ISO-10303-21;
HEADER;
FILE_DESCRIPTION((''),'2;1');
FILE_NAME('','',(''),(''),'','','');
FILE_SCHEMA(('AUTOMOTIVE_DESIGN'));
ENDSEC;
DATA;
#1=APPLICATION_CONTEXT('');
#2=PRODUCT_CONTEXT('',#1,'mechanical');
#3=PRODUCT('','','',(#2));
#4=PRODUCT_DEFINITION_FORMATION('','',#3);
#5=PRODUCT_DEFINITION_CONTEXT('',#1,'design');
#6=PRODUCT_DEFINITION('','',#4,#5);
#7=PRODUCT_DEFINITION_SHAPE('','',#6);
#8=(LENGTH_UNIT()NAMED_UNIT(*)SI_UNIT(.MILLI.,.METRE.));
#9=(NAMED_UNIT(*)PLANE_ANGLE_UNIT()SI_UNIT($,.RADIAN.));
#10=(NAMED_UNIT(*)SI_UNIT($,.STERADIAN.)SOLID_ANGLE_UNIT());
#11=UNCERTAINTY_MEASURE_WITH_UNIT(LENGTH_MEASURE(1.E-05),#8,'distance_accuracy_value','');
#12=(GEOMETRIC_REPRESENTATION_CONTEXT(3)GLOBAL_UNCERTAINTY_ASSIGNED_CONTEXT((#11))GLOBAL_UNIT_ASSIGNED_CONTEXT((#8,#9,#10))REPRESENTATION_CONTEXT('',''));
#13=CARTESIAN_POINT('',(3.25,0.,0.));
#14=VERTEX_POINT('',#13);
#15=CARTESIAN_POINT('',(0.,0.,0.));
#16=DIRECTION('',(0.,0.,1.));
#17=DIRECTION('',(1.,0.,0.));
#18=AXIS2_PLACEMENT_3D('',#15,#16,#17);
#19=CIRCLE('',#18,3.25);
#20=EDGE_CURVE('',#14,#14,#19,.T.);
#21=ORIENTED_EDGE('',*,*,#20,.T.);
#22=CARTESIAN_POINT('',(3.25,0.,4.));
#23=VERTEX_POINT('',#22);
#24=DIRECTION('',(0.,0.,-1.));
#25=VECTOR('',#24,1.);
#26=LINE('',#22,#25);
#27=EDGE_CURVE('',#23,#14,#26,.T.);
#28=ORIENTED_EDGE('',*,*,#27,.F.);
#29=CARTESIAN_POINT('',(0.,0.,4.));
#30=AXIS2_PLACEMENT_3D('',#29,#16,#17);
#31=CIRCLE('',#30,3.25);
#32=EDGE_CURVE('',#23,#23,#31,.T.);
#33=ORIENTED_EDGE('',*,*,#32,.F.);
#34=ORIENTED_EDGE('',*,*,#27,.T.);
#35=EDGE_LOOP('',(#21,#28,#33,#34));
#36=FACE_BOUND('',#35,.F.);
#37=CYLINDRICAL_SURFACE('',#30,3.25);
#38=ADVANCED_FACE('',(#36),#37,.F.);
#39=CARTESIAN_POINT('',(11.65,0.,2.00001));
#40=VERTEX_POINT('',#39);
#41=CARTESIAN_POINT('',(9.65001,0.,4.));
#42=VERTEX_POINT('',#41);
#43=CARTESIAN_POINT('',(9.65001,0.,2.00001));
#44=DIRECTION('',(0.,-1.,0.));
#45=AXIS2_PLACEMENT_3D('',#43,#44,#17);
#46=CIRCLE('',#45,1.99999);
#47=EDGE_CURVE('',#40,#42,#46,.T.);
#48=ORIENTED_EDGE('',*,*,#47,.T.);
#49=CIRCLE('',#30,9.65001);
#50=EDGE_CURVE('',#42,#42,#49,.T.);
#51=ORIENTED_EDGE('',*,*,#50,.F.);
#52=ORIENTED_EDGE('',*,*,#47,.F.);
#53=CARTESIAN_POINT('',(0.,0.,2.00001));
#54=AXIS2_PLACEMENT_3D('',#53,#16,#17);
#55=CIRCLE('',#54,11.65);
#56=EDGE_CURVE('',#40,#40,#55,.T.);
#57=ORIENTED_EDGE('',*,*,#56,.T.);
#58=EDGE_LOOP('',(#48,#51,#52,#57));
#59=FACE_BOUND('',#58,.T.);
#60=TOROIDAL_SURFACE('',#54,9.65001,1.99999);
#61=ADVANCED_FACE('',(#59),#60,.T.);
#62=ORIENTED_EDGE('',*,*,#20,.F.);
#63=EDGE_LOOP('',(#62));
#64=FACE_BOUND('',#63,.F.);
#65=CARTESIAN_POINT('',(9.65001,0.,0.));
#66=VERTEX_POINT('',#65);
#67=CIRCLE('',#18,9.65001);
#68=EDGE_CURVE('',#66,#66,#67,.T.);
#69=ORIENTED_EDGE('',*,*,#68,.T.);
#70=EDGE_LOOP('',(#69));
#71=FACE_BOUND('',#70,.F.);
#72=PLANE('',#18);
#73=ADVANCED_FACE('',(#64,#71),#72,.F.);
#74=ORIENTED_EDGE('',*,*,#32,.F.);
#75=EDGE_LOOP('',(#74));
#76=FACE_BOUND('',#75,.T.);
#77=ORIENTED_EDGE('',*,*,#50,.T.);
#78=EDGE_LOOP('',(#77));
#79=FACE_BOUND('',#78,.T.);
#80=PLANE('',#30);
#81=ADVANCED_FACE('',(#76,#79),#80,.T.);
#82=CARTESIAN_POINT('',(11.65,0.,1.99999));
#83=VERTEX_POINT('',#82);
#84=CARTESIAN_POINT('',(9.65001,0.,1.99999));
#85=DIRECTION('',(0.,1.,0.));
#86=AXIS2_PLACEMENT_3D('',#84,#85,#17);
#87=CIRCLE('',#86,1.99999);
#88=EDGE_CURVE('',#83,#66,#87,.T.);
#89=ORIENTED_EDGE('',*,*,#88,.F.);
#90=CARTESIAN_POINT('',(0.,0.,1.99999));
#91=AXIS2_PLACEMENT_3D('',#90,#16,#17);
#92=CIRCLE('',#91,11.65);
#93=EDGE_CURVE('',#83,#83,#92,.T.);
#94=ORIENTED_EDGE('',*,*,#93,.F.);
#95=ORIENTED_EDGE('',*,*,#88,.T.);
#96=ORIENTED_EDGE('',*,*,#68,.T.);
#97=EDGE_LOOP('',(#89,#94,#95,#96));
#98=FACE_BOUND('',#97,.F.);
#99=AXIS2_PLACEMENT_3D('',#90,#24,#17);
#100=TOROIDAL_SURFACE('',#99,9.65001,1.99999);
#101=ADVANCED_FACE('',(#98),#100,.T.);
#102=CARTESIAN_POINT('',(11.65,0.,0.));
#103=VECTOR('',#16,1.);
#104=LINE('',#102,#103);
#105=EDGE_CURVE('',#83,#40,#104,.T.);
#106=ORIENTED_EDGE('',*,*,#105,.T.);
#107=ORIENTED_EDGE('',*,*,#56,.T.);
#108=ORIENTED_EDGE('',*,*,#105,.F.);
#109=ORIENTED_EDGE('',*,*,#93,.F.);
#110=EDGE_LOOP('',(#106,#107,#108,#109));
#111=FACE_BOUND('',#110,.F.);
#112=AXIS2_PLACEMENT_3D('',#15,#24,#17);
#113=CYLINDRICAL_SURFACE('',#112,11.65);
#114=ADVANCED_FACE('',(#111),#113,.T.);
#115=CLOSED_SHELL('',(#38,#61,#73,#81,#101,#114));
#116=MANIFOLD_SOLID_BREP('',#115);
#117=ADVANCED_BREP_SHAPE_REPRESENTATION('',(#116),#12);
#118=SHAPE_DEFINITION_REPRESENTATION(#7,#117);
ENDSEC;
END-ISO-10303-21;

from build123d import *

# Parameters (mm, degrees)
F0_R     = 11.65
F1_DEPTH = 4
F2_R     = 1.99999
F3_R     = 3.25
F4_DEPTH = 25


# Not quite as in the source:
# - a fillet or chamfer is up to 0.001 mm smaller than in the source, because OpenCascade refuses the exact size


with BuildPart() as f1:
    # F0 (on Top) → F1 (new body)
    with BuildSketch(Plane.XY):
        Circle(F0_R)
    extrude(amount=F1_DEPTH)

    # F2 (radius 2 in the source; OpenCascade refuses exactly that, so slightly less here)
    f2_edges = [f1.edges().sort_by_distance(p)[0] for p in [
        (-11.65, 0, 4),
        (-11.65, 0, 0),
    ]]
    fillet(f2_edges, radius=F2_R)

    # F3 (on face) → F4 (cut)
    with BuildSketch(Plane.XY.offset(4)):
        Circle(F3_R)
    extrude(amount=-F4_DEPTH, mode=Mode.SUBTRACT)


solid = f1.part
